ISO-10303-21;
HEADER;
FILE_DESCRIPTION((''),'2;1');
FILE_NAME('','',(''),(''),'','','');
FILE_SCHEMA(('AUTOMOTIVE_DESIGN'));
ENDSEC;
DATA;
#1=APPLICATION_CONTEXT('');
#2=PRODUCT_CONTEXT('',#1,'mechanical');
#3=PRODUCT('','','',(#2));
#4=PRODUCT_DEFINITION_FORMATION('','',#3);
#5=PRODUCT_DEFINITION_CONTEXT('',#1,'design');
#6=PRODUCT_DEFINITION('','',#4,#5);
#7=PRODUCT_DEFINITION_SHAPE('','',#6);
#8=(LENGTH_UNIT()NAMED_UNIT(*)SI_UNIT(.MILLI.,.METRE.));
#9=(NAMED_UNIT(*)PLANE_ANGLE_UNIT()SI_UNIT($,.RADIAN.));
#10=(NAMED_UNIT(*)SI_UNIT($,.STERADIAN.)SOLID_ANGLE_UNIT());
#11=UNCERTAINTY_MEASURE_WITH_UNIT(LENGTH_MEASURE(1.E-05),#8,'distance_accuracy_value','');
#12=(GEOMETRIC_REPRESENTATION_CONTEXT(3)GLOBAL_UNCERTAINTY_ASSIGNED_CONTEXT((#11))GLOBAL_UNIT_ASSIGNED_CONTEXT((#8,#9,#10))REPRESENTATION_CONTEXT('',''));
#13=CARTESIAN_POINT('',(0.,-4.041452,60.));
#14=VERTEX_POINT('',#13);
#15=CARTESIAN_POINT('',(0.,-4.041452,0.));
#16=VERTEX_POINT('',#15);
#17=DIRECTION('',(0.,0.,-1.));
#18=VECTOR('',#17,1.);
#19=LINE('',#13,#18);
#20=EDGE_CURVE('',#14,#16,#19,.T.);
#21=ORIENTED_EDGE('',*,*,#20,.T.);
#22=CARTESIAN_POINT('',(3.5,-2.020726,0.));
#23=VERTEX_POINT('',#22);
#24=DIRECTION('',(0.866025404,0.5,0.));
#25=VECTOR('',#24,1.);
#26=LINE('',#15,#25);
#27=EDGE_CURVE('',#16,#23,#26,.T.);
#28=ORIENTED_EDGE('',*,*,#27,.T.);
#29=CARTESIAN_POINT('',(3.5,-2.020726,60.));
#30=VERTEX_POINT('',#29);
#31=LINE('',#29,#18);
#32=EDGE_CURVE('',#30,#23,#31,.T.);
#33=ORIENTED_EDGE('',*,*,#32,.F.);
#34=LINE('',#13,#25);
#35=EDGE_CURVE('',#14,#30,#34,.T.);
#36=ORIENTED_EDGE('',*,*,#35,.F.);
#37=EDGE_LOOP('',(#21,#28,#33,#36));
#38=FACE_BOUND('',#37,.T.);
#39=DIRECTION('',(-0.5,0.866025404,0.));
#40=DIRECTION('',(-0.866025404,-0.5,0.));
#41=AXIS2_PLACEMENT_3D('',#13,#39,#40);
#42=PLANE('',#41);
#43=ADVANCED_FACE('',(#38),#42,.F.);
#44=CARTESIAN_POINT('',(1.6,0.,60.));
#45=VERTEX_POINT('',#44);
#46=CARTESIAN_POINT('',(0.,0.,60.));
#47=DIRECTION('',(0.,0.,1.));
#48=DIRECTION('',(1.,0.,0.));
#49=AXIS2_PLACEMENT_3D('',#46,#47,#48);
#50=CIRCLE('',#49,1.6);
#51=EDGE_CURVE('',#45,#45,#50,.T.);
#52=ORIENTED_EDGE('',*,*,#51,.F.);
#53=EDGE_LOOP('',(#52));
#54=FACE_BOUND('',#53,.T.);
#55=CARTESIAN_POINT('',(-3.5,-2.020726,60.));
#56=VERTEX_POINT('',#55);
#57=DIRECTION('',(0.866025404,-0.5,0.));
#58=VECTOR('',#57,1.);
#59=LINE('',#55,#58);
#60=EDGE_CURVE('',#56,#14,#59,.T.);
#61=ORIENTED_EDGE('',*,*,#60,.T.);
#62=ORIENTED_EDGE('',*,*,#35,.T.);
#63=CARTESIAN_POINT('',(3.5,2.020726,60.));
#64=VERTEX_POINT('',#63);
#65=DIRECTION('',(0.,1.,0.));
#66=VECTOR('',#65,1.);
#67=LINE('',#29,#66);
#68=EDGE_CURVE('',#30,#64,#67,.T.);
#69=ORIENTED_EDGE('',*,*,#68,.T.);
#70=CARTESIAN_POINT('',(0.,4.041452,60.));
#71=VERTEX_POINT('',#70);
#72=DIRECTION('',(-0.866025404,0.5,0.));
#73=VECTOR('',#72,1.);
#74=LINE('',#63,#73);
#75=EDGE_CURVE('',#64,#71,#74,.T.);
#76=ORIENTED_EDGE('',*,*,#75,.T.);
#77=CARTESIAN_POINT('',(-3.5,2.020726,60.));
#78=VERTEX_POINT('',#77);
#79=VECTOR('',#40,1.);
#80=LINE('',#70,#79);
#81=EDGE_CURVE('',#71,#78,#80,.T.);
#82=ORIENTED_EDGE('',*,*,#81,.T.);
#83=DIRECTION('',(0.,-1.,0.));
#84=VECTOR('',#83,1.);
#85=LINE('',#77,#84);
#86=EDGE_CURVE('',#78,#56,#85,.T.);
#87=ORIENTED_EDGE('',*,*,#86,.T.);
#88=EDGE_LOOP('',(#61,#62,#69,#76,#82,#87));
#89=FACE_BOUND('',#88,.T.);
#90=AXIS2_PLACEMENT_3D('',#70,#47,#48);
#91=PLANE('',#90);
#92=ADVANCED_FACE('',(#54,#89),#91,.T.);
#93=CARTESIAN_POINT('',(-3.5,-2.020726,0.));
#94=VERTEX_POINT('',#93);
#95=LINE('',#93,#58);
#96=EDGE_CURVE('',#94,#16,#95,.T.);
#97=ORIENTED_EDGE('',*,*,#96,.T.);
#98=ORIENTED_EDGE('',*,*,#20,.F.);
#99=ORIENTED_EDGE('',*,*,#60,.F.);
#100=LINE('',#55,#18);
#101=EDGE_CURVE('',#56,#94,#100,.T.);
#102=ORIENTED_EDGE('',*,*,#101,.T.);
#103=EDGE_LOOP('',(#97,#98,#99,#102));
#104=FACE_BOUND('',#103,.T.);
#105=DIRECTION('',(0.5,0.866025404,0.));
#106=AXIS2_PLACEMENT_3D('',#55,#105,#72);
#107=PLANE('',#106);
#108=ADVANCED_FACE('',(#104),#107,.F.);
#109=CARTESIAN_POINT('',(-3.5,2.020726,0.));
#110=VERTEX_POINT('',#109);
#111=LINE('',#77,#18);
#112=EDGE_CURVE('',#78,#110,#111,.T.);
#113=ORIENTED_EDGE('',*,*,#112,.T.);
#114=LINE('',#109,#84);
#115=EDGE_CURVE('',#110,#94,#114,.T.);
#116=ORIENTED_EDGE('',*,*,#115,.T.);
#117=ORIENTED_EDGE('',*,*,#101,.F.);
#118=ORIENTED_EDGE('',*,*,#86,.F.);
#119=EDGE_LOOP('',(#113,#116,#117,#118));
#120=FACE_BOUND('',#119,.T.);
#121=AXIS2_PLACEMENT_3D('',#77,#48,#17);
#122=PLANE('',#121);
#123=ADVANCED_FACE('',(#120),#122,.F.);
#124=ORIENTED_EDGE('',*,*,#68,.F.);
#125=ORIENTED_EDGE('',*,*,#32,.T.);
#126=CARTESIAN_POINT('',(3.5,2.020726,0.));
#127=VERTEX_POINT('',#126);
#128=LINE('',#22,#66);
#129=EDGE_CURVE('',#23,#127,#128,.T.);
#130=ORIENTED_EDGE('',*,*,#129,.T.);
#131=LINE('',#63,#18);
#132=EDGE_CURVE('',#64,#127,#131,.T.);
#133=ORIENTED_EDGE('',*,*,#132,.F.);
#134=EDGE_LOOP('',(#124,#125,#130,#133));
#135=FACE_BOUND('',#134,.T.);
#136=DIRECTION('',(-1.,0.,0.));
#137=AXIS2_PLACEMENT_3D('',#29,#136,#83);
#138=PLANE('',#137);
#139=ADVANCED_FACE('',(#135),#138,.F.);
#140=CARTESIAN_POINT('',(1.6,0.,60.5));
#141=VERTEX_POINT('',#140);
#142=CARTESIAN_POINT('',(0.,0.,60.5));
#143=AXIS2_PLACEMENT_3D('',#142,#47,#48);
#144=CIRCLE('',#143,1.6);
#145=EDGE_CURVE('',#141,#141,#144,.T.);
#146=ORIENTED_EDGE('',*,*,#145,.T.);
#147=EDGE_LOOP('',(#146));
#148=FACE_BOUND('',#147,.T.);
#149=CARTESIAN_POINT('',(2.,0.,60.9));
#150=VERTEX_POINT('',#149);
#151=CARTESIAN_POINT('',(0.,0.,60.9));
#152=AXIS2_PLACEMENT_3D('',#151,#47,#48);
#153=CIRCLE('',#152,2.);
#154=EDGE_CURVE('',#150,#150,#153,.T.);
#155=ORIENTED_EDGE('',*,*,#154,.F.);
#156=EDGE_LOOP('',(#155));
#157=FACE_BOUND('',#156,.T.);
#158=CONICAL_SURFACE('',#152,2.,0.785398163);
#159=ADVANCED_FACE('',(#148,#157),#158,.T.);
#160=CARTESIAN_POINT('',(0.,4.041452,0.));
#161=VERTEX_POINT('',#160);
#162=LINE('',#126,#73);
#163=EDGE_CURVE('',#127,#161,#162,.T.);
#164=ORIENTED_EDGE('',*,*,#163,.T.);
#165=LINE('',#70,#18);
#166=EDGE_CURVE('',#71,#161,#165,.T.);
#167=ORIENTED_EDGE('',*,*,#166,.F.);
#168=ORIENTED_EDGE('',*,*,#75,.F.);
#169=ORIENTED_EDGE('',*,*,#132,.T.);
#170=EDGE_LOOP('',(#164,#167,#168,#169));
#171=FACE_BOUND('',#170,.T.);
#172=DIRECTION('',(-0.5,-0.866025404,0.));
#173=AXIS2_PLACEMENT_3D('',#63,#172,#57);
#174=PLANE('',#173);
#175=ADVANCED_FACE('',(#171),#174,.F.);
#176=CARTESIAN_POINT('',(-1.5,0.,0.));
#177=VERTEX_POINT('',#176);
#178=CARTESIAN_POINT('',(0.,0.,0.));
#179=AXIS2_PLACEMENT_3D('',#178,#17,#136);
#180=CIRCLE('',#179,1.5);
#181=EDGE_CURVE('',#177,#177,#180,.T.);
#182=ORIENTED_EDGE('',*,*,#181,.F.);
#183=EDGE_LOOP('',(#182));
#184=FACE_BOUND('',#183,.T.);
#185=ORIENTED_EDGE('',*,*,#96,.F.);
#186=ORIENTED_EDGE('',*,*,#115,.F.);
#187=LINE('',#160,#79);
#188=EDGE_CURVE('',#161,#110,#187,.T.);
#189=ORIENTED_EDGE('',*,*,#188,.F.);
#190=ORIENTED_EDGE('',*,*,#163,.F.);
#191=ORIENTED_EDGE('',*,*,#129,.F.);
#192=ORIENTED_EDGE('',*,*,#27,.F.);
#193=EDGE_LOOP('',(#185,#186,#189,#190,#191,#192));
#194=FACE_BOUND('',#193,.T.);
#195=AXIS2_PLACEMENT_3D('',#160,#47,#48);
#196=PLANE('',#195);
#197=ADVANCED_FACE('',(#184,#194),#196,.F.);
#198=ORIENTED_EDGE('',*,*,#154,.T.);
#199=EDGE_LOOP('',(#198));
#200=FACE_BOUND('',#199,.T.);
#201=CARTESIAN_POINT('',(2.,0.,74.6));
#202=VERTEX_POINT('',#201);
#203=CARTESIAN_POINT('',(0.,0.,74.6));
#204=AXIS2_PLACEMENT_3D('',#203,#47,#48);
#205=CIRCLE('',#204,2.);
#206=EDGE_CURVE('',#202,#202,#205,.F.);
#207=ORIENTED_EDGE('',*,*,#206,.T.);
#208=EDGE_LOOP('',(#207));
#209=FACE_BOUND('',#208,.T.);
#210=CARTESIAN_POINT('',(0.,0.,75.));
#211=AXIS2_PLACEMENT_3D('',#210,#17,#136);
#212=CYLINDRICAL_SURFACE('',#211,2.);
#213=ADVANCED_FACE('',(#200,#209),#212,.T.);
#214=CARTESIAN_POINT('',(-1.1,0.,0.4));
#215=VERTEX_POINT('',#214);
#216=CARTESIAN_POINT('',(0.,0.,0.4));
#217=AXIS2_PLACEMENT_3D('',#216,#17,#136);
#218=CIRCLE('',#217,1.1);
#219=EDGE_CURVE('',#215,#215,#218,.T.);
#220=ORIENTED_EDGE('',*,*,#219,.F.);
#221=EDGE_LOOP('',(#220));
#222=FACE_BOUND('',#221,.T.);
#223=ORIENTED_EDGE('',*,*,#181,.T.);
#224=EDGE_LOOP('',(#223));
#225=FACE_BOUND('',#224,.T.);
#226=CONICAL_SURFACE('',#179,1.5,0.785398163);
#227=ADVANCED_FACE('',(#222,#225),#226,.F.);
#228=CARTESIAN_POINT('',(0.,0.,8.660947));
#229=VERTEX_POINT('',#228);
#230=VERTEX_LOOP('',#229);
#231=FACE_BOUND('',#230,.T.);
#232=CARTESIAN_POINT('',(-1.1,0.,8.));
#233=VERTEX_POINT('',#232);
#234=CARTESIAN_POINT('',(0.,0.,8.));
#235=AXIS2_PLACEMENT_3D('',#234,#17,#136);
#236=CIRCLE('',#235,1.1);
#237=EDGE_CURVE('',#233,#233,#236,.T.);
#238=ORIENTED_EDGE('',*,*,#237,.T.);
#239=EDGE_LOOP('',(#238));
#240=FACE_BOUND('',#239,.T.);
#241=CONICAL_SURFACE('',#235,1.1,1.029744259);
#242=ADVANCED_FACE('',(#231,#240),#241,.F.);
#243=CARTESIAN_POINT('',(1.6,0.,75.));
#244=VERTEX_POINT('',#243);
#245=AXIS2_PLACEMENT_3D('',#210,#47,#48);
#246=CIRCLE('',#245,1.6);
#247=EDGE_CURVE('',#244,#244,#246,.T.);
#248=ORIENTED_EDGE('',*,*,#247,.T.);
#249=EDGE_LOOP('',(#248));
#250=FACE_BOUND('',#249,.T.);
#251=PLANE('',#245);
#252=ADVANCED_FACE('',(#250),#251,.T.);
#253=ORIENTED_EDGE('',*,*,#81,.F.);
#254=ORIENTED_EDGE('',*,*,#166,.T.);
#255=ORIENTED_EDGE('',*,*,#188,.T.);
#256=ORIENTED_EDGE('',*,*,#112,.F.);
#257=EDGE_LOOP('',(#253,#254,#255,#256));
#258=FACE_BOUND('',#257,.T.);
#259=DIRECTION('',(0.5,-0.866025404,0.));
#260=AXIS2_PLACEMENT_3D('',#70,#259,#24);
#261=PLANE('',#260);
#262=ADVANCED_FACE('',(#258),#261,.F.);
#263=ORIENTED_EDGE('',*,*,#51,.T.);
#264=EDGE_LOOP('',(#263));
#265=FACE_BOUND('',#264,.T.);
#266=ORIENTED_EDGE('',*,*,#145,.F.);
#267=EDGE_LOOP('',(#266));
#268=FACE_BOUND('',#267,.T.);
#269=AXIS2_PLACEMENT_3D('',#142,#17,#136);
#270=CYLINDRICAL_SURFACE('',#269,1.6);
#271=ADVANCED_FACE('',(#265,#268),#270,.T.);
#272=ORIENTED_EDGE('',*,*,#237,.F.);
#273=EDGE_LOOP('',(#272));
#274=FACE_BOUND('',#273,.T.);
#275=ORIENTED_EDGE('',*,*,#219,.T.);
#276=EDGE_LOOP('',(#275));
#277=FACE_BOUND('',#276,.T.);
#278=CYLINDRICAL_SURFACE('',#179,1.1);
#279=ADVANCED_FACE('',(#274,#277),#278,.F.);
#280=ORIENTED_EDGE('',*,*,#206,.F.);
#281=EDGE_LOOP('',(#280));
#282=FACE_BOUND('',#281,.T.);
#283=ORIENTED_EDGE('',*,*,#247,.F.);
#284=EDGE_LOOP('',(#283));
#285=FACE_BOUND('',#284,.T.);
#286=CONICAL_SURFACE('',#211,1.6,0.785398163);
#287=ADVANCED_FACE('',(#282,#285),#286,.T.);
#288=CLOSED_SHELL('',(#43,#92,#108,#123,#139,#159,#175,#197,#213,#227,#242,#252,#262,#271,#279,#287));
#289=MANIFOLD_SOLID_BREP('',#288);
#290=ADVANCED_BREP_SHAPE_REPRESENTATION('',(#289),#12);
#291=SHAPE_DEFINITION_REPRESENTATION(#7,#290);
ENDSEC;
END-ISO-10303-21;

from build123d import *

# Parameters (mm, degrees)
EXTRUDE_1_DEPTH             = 60
SKETCH_2_R                  = 2
EXTRUDE_2_DEPTH             = 15
SKETCH_3_R                  = 2
SKETCH_3_R_2                = 1.6
CUT_EXTRUDE_3_DEPTH         = 0.5
CHAMFER_1_SIZE              = 0.4
HOLE_WIZARD_M31_D           = 2.2
HOLE_WIZARD_M31_DEPTH       = 8
HOLE_WIZARD_M31_CSINK_D     = 3
HOLE_WIZARD_M31_CSINK_ANGLE = 90
HOLE_WIZARD_M31_TIP         = 0.660946681


with BuildPart() as part:
    # Эскиз1 → Вытянуть1 (new body)
    with BuildSketch(Plane.XY):
        Polygon((0, 4.041451884), (-3.5, 2.020725942), (-3.5, -2.020725942), (0, -4.041451884), (3.5, -2.020725942), (3.5, 2.020725942), align=None)
    extrude(amount=EXTRUDE_1_DEPTH)

    # Эскиз2 → Вытянуть2 (add)
    with BuildSketch(Plane.XY.offset(60)):
        Circle(SKETCH_2_R)
    extrude(amount=EXTRUDE_2_DEPTH)

    # Эскиз3 → Вырез-Вытянуть3 (cut)
    with BuildSketch(Plane.XY.offset(60)):
        Circle(SKETCH_3_R)
        Circle(SKETCH_3_R_2, mode=Mode.SUBTRACT)
    extrude(amount=CUT_EXTRUDE_3_DEPTH, mode=Mode.SUBTRACT)

    # Фаска1
    chamfer_1_edges = [part.edges().sort_by_distance(p)[0] for p in [
        (-2, 0, 75),
        (-2, 0, 60.5),
    ]]
    chamfer(chamfer_1_edges, length=CHAMFER_1_SIZE - 0.0001)  # a hair under: the kernel refuses the full size

    # Отверстие с зазором M31
    with Locations(Plane(origin=(0, 0, 0), x_dir=(-1, 0, 0), z_dir=(0, 0, -1))):
        with Locations((0, 0)):
            CounterSinkHole(HOLE_WIZARD_M31_D / 2, HOLE_WIZARD_M31_CSINK_D / 2, depth=HOLE_WIZARD_M31_DEPTH, counter_sink_angle=HOLE_WIZARD_M31_CSINK_ANGLE)
            with Locations((0, 0, -(HOLE_WIZARD_M31_DEPTH + HOLE_WIZARD_M31_TIP / 2))):  # 118° drill point
                Cone(0, HOLE_WIZARD_M31_D / 2, HOLE_WIZARD_M31_TIP, mode=Mode.SUBTRACT)


solid = part.part
